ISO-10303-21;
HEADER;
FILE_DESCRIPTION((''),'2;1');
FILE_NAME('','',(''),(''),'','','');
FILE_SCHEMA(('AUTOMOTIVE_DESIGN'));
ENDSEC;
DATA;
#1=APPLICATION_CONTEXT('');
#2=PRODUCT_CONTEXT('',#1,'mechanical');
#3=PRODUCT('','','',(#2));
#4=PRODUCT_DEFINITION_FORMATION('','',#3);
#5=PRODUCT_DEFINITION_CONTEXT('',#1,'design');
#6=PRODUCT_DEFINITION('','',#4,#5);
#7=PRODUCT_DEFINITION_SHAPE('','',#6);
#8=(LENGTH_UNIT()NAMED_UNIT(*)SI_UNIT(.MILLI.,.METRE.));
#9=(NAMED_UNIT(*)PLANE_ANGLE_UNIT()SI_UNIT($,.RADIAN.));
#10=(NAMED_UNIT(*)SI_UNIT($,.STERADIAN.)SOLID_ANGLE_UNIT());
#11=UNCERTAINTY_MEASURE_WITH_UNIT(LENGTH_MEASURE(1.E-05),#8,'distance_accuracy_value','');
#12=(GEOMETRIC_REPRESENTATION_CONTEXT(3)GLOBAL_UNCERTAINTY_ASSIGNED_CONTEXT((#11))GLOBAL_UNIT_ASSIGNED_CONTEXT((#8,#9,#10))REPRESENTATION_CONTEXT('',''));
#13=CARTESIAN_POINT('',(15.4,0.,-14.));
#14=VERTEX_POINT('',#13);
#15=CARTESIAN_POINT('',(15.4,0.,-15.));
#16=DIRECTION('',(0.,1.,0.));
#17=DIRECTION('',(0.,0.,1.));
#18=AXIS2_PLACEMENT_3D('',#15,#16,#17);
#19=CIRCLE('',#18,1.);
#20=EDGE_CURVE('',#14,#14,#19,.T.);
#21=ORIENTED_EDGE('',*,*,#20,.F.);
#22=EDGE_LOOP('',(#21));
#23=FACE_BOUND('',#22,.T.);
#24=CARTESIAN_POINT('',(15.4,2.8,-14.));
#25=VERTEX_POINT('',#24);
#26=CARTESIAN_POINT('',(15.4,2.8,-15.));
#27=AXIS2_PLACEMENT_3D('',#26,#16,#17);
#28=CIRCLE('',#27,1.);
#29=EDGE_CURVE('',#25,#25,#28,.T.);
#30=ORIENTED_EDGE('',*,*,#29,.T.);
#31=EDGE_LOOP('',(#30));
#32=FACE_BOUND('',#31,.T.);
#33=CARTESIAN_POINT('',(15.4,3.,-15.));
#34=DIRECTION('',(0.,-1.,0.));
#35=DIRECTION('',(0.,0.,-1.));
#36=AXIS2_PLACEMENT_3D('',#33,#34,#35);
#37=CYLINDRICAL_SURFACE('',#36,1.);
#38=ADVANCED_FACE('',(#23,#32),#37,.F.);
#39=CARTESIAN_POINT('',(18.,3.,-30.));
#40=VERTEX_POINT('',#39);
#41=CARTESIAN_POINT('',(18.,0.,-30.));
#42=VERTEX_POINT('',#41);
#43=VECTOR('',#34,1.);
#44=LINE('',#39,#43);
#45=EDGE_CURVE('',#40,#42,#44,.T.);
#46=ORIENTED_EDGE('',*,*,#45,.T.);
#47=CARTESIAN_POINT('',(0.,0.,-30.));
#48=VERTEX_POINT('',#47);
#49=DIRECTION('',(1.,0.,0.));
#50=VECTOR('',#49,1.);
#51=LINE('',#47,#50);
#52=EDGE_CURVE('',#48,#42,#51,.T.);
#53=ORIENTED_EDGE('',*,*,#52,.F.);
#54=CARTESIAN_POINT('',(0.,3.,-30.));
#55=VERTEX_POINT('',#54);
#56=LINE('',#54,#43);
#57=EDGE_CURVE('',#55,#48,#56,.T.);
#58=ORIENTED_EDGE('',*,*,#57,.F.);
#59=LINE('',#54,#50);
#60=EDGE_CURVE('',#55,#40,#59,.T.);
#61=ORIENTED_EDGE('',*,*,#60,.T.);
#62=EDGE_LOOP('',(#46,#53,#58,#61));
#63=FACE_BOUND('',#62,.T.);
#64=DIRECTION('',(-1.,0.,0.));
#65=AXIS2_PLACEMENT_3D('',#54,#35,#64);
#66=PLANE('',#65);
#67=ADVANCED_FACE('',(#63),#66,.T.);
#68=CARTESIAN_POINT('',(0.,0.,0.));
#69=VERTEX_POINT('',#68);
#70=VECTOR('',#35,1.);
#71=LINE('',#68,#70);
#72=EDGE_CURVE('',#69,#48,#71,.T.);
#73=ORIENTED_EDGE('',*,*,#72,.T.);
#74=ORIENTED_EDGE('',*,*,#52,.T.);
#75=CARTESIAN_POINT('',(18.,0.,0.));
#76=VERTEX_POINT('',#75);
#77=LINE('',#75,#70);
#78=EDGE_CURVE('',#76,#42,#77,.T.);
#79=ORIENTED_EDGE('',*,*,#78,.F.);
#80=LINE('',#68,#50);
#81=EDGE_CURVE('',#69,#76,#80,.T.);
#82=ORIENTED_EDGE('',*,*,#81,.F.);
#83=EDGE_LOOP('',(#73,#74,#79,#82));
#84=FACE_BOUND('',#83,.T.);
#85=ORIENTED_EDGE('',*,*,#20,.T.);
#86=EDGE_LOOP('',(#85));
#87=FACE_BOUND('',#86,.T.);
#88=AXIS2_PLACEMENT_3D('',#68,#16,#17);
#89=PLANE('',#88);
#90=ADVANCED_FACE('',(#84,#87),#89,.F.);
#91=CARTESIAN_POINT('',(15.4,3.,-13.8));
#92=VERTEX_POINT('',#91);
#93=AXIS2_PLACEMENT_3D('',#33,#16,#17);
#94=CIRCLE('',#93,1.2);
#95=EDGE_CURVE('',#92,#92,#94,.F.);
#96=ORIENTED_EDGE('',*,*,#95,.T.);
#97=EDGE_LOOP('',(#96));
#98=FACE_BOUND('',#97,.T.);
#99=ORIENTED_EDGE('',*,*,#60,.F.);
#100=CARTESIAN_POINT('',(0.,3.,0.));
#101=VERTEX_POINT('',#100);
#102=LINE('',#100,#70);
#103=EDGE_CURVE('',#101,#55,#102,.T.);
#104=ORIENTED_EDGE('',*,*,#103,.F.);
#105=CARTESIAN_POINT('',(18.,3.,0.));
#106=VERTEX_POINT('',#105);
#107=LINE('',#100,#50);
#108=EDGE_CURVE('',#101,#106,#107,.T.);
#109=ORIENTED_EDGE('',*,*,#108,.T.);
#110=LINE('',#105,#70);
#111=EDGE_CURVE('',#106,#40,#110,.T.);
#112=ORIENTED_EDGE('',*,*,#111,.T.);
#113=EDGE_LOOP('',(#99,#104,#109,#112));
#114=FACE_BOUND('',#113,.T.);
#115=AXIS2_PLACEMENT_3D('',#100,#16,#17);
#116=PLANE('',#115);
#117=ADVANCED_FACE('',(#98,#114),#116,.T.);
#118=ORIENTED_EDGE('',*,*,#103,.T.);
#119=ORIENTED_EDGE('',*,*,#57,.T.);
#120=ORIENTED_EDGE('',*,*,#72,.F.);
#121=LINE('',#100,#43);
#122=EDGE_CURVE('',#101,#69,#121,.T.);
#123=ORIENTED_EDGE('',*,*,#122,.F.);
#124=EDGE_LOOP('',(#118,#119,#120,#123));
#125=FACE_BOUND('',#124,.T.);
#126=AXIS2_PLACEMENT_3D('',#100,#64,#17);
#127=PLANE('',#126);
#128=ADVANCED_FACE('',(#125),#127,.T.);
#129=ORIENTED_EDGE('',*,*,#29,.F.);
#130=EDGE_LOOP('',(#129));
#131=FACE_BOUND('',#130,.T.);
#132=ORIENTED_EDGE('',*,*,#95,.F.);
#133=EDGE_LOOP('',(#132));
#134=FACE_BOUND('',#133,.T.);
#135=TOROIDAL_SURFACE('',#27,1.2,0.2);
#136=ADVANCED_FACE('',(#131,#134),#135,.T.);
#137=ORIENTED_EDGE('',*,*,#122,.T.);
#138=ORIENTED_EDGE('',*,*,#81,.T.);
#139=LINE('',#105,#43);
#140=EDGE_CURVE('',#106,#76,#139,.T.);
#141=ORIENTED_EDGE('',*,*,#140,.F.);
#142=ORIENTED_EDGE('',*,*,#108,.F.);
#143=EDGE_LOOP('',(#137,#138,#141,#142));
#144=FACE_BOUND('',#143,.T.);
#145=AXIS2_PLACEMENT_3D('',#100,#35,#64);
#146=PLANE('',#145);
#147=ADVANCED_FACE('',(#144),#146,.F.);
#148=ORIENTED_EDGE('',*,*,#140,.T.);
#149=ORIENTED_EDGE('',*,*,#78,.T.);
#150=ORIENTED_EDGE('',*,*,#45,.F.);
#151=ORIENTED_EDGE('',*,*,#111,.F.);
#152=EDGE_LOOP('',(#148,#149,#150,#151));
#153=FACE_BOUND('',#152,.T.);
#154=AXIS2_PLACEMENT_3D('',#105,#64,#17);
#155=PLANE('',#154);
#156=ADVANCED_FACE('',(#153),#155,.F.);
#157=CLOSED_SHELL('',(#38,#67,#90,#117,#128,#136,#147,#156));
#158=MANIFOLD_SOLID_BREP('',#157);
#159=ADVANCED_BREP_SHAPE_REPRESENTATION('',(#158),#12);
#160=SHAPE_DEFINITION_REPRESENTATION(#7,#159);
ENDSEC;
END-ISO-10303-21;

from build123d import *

# Parameters (mm, degrees)
SKETCH_1_W      = 18
SKETCH_1_H      = 30
SKETCH_1_R      = 1
EXTRUDE_1_DEPTH = 3
FILLET_1_R      = 0.2


with BuildPart() as part:
    # 草图1 → 凸台-拉伸1 (new body)
    with BuildSketch(Plane(origin=(0, 0, 0), x_dir=(1, 0, 0), z_dir=(0, 1, 0))):
        with Locations((9, 15)):
            Rectangle(SKETCH_1_W, SKETCH_1_H)
        with Locations((15.4, 15)):
            Circle(SKETCH_1_R, mode=Mode.SUBTRACT)
    extrude(amount=EXTRUDE_1_DEPTH)

    # 圆角1
    fillet_1_edges = [part.edges().sort_by_distance(p)[0] for p in [
        (14.4, 3, -15),
    ]]
    fillet(fillet_1_edges, radius=FILLET_1_R)


solid = part.part
